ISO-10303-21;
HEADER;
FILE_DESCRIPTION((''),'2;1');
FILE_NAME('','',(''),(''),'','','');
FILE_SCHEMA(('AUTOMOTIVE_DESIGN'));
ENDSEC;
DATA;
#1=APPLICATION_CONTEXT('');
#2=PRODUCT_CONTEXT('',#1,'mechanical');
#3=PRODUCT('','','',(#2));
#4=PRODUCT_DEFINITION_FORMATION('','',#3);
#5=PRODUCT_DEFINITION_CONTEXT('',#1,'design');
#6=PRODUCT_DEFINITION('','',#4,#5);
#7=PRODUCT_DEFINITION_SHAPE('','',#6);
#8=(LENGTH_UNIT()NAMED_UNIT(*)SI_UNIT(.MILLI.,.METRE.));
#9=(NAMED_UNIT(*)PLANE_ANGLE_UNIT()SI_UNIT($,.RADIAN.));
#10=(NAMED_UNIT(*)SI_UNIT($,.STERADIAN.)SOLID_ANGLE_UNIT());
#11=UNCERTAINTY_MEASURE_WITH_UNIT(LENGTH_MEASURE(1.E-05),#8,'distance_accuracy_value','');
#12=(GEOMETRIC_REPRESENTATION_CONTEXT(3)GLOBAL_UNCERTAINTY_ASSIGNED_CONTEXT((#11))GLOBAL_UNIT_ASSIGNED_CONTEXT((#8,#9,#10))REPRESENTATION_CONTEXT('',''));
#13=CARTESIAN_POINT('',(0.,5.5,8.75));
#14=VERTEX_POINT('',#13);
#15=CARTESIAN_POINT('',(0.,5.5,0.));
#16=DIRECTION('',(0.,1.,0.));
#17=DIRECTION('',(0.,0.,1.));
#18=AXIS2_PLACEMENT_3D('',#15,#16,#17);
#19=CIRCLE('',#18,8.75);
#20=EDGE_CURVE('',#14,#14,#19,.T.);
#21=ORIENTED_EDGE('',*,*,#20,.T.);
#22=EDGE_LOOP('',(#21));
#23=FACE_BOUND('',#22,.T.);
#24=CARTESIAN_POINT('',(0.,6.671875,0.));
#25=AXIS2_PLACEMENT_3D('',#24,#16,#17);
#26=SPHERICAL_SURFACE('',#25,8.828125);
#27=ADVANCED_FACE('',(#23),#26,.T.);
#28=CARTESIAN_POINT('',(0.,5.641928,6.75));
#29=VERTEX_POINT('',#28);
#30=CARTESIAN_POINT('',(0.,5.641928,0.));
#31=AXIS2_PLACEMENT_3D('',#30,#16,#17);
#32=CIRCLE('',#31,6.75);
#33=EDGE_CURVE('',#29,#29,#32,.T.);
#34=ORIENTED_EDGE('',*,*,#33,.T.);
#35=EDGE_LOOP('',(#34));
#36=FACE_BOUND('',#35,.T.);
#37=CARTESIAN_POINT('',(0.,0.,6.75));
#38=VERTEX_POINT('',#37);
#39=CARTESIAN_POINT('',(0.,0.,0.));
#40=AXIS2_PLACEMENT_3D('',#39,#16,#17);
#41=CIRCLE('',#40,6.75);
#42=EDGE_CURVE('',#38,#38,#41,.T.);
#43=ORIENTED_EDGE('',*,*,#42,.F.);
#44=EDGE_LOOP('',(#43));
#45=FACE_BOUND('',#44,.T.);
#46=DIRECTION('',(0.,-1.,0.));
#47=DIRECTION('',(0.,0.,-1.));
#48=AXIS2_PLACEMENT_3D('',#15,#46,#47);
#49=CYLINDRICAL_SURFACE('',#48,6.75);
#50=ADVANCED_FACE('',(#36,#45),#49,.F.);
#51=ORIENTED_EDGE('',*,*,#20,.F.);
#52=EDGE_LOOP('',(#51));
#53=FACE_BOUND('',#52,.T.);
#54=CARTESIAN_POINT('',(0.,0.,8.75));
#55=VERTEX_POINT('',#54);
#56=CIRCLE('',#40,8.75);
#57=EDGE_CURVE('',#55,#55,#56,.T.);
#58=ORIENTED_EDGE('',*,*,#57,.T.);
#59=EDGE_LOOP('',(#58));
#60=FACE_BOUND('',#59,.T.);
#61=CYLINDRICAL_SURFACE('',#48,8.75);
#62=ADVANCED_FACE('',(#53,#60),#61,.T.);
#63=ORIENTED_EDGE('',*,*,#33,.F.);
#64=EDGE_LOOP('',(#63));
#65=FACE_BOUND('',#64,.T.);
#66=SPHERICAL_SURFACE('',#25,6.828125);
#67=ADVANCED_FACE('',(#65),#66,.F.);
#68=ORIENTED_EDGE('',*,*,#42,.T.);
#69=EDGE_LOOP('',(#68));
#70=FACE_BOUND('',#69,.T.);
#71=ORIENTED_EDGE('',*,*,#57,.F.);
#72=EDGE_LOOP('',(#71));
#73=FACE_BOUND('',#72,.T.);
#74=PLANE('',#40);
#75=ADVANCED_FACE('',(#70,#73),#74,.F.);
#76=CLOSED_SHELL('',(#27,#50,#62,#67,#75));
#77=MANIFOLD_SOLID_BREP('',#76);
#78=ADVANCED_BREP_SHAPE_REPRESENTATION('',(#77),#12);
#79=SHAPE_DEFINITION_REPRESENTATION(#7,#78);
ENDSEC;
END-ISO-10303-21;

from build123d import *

# Parameters (mm, degrees)
SKETCH_1_R         = 8.75
EXTRUDE_1_DEPTH    = 5.5
DOME_1_FACE_RADIUS = 8.75
DOME_1_HEIGHT      = 10


# Read off the part's stored shape, not the designer's step: 抽壳1
with BuildPart() as part:
    # 草图1 → 凸台-拉伸1 (new body)
    with BuildSketch(Plane(origin=(0, 0, 0), x_dir=(1, 0, 0), z_dir=(0, 1, 0))):
        with Locations(Location((0, 0, 0), (0, 0, 270))):
            Circle(SKETCH_1_R)
    extrude(amount=EXTRUDE_1_DEPTH)

    # 圆顶1: a dome of height H over a round flat face of radius A is a cap of a sphere of radius (A * A + H * H) / (2 * H)
    dome_1_r = (DOME_1_FACE_RADIUS * DOME_1_FACE_RADIUS + DOME_1_HEIGHT * DOME_1_HEIGHT) / (2 * DOME_1_HEIGHT)
    dome_1_base = Plane((0, 5.5, 0), z_dir=(0, 1, 0))
    with Locations(dome_1_base.offset(DOME_1_HEIGHT - dome_1_r)):
        dome_1_ball = Sphere(dome_1_r, mode=Mode.PRIVATE)
    add(split(dome_1_ball, bisect_by=dome_1_base, keep=Keep.TOP, mode=Mode.PRIVATE))

    # 抽壳1 outline → 抽壳1 (revolve, cut)
    with BuildSketch(Plane.XY):
        with BuildLine():
            Line((0, 13.5), (0, 0))
            Line((0, 0), (6.75, 0))
            Line((6.75, 0), (6.75, 5.641927904))
            ThreePointArc((6.75, 5.641927904), (5.179570375, 11.12107063), (0, 13.5))
        make_face()
    revolve(axis=Axis((0, 0, 0), (0, 1, 0)), mode=Mode.SUBTRACT)


solid = part.part
